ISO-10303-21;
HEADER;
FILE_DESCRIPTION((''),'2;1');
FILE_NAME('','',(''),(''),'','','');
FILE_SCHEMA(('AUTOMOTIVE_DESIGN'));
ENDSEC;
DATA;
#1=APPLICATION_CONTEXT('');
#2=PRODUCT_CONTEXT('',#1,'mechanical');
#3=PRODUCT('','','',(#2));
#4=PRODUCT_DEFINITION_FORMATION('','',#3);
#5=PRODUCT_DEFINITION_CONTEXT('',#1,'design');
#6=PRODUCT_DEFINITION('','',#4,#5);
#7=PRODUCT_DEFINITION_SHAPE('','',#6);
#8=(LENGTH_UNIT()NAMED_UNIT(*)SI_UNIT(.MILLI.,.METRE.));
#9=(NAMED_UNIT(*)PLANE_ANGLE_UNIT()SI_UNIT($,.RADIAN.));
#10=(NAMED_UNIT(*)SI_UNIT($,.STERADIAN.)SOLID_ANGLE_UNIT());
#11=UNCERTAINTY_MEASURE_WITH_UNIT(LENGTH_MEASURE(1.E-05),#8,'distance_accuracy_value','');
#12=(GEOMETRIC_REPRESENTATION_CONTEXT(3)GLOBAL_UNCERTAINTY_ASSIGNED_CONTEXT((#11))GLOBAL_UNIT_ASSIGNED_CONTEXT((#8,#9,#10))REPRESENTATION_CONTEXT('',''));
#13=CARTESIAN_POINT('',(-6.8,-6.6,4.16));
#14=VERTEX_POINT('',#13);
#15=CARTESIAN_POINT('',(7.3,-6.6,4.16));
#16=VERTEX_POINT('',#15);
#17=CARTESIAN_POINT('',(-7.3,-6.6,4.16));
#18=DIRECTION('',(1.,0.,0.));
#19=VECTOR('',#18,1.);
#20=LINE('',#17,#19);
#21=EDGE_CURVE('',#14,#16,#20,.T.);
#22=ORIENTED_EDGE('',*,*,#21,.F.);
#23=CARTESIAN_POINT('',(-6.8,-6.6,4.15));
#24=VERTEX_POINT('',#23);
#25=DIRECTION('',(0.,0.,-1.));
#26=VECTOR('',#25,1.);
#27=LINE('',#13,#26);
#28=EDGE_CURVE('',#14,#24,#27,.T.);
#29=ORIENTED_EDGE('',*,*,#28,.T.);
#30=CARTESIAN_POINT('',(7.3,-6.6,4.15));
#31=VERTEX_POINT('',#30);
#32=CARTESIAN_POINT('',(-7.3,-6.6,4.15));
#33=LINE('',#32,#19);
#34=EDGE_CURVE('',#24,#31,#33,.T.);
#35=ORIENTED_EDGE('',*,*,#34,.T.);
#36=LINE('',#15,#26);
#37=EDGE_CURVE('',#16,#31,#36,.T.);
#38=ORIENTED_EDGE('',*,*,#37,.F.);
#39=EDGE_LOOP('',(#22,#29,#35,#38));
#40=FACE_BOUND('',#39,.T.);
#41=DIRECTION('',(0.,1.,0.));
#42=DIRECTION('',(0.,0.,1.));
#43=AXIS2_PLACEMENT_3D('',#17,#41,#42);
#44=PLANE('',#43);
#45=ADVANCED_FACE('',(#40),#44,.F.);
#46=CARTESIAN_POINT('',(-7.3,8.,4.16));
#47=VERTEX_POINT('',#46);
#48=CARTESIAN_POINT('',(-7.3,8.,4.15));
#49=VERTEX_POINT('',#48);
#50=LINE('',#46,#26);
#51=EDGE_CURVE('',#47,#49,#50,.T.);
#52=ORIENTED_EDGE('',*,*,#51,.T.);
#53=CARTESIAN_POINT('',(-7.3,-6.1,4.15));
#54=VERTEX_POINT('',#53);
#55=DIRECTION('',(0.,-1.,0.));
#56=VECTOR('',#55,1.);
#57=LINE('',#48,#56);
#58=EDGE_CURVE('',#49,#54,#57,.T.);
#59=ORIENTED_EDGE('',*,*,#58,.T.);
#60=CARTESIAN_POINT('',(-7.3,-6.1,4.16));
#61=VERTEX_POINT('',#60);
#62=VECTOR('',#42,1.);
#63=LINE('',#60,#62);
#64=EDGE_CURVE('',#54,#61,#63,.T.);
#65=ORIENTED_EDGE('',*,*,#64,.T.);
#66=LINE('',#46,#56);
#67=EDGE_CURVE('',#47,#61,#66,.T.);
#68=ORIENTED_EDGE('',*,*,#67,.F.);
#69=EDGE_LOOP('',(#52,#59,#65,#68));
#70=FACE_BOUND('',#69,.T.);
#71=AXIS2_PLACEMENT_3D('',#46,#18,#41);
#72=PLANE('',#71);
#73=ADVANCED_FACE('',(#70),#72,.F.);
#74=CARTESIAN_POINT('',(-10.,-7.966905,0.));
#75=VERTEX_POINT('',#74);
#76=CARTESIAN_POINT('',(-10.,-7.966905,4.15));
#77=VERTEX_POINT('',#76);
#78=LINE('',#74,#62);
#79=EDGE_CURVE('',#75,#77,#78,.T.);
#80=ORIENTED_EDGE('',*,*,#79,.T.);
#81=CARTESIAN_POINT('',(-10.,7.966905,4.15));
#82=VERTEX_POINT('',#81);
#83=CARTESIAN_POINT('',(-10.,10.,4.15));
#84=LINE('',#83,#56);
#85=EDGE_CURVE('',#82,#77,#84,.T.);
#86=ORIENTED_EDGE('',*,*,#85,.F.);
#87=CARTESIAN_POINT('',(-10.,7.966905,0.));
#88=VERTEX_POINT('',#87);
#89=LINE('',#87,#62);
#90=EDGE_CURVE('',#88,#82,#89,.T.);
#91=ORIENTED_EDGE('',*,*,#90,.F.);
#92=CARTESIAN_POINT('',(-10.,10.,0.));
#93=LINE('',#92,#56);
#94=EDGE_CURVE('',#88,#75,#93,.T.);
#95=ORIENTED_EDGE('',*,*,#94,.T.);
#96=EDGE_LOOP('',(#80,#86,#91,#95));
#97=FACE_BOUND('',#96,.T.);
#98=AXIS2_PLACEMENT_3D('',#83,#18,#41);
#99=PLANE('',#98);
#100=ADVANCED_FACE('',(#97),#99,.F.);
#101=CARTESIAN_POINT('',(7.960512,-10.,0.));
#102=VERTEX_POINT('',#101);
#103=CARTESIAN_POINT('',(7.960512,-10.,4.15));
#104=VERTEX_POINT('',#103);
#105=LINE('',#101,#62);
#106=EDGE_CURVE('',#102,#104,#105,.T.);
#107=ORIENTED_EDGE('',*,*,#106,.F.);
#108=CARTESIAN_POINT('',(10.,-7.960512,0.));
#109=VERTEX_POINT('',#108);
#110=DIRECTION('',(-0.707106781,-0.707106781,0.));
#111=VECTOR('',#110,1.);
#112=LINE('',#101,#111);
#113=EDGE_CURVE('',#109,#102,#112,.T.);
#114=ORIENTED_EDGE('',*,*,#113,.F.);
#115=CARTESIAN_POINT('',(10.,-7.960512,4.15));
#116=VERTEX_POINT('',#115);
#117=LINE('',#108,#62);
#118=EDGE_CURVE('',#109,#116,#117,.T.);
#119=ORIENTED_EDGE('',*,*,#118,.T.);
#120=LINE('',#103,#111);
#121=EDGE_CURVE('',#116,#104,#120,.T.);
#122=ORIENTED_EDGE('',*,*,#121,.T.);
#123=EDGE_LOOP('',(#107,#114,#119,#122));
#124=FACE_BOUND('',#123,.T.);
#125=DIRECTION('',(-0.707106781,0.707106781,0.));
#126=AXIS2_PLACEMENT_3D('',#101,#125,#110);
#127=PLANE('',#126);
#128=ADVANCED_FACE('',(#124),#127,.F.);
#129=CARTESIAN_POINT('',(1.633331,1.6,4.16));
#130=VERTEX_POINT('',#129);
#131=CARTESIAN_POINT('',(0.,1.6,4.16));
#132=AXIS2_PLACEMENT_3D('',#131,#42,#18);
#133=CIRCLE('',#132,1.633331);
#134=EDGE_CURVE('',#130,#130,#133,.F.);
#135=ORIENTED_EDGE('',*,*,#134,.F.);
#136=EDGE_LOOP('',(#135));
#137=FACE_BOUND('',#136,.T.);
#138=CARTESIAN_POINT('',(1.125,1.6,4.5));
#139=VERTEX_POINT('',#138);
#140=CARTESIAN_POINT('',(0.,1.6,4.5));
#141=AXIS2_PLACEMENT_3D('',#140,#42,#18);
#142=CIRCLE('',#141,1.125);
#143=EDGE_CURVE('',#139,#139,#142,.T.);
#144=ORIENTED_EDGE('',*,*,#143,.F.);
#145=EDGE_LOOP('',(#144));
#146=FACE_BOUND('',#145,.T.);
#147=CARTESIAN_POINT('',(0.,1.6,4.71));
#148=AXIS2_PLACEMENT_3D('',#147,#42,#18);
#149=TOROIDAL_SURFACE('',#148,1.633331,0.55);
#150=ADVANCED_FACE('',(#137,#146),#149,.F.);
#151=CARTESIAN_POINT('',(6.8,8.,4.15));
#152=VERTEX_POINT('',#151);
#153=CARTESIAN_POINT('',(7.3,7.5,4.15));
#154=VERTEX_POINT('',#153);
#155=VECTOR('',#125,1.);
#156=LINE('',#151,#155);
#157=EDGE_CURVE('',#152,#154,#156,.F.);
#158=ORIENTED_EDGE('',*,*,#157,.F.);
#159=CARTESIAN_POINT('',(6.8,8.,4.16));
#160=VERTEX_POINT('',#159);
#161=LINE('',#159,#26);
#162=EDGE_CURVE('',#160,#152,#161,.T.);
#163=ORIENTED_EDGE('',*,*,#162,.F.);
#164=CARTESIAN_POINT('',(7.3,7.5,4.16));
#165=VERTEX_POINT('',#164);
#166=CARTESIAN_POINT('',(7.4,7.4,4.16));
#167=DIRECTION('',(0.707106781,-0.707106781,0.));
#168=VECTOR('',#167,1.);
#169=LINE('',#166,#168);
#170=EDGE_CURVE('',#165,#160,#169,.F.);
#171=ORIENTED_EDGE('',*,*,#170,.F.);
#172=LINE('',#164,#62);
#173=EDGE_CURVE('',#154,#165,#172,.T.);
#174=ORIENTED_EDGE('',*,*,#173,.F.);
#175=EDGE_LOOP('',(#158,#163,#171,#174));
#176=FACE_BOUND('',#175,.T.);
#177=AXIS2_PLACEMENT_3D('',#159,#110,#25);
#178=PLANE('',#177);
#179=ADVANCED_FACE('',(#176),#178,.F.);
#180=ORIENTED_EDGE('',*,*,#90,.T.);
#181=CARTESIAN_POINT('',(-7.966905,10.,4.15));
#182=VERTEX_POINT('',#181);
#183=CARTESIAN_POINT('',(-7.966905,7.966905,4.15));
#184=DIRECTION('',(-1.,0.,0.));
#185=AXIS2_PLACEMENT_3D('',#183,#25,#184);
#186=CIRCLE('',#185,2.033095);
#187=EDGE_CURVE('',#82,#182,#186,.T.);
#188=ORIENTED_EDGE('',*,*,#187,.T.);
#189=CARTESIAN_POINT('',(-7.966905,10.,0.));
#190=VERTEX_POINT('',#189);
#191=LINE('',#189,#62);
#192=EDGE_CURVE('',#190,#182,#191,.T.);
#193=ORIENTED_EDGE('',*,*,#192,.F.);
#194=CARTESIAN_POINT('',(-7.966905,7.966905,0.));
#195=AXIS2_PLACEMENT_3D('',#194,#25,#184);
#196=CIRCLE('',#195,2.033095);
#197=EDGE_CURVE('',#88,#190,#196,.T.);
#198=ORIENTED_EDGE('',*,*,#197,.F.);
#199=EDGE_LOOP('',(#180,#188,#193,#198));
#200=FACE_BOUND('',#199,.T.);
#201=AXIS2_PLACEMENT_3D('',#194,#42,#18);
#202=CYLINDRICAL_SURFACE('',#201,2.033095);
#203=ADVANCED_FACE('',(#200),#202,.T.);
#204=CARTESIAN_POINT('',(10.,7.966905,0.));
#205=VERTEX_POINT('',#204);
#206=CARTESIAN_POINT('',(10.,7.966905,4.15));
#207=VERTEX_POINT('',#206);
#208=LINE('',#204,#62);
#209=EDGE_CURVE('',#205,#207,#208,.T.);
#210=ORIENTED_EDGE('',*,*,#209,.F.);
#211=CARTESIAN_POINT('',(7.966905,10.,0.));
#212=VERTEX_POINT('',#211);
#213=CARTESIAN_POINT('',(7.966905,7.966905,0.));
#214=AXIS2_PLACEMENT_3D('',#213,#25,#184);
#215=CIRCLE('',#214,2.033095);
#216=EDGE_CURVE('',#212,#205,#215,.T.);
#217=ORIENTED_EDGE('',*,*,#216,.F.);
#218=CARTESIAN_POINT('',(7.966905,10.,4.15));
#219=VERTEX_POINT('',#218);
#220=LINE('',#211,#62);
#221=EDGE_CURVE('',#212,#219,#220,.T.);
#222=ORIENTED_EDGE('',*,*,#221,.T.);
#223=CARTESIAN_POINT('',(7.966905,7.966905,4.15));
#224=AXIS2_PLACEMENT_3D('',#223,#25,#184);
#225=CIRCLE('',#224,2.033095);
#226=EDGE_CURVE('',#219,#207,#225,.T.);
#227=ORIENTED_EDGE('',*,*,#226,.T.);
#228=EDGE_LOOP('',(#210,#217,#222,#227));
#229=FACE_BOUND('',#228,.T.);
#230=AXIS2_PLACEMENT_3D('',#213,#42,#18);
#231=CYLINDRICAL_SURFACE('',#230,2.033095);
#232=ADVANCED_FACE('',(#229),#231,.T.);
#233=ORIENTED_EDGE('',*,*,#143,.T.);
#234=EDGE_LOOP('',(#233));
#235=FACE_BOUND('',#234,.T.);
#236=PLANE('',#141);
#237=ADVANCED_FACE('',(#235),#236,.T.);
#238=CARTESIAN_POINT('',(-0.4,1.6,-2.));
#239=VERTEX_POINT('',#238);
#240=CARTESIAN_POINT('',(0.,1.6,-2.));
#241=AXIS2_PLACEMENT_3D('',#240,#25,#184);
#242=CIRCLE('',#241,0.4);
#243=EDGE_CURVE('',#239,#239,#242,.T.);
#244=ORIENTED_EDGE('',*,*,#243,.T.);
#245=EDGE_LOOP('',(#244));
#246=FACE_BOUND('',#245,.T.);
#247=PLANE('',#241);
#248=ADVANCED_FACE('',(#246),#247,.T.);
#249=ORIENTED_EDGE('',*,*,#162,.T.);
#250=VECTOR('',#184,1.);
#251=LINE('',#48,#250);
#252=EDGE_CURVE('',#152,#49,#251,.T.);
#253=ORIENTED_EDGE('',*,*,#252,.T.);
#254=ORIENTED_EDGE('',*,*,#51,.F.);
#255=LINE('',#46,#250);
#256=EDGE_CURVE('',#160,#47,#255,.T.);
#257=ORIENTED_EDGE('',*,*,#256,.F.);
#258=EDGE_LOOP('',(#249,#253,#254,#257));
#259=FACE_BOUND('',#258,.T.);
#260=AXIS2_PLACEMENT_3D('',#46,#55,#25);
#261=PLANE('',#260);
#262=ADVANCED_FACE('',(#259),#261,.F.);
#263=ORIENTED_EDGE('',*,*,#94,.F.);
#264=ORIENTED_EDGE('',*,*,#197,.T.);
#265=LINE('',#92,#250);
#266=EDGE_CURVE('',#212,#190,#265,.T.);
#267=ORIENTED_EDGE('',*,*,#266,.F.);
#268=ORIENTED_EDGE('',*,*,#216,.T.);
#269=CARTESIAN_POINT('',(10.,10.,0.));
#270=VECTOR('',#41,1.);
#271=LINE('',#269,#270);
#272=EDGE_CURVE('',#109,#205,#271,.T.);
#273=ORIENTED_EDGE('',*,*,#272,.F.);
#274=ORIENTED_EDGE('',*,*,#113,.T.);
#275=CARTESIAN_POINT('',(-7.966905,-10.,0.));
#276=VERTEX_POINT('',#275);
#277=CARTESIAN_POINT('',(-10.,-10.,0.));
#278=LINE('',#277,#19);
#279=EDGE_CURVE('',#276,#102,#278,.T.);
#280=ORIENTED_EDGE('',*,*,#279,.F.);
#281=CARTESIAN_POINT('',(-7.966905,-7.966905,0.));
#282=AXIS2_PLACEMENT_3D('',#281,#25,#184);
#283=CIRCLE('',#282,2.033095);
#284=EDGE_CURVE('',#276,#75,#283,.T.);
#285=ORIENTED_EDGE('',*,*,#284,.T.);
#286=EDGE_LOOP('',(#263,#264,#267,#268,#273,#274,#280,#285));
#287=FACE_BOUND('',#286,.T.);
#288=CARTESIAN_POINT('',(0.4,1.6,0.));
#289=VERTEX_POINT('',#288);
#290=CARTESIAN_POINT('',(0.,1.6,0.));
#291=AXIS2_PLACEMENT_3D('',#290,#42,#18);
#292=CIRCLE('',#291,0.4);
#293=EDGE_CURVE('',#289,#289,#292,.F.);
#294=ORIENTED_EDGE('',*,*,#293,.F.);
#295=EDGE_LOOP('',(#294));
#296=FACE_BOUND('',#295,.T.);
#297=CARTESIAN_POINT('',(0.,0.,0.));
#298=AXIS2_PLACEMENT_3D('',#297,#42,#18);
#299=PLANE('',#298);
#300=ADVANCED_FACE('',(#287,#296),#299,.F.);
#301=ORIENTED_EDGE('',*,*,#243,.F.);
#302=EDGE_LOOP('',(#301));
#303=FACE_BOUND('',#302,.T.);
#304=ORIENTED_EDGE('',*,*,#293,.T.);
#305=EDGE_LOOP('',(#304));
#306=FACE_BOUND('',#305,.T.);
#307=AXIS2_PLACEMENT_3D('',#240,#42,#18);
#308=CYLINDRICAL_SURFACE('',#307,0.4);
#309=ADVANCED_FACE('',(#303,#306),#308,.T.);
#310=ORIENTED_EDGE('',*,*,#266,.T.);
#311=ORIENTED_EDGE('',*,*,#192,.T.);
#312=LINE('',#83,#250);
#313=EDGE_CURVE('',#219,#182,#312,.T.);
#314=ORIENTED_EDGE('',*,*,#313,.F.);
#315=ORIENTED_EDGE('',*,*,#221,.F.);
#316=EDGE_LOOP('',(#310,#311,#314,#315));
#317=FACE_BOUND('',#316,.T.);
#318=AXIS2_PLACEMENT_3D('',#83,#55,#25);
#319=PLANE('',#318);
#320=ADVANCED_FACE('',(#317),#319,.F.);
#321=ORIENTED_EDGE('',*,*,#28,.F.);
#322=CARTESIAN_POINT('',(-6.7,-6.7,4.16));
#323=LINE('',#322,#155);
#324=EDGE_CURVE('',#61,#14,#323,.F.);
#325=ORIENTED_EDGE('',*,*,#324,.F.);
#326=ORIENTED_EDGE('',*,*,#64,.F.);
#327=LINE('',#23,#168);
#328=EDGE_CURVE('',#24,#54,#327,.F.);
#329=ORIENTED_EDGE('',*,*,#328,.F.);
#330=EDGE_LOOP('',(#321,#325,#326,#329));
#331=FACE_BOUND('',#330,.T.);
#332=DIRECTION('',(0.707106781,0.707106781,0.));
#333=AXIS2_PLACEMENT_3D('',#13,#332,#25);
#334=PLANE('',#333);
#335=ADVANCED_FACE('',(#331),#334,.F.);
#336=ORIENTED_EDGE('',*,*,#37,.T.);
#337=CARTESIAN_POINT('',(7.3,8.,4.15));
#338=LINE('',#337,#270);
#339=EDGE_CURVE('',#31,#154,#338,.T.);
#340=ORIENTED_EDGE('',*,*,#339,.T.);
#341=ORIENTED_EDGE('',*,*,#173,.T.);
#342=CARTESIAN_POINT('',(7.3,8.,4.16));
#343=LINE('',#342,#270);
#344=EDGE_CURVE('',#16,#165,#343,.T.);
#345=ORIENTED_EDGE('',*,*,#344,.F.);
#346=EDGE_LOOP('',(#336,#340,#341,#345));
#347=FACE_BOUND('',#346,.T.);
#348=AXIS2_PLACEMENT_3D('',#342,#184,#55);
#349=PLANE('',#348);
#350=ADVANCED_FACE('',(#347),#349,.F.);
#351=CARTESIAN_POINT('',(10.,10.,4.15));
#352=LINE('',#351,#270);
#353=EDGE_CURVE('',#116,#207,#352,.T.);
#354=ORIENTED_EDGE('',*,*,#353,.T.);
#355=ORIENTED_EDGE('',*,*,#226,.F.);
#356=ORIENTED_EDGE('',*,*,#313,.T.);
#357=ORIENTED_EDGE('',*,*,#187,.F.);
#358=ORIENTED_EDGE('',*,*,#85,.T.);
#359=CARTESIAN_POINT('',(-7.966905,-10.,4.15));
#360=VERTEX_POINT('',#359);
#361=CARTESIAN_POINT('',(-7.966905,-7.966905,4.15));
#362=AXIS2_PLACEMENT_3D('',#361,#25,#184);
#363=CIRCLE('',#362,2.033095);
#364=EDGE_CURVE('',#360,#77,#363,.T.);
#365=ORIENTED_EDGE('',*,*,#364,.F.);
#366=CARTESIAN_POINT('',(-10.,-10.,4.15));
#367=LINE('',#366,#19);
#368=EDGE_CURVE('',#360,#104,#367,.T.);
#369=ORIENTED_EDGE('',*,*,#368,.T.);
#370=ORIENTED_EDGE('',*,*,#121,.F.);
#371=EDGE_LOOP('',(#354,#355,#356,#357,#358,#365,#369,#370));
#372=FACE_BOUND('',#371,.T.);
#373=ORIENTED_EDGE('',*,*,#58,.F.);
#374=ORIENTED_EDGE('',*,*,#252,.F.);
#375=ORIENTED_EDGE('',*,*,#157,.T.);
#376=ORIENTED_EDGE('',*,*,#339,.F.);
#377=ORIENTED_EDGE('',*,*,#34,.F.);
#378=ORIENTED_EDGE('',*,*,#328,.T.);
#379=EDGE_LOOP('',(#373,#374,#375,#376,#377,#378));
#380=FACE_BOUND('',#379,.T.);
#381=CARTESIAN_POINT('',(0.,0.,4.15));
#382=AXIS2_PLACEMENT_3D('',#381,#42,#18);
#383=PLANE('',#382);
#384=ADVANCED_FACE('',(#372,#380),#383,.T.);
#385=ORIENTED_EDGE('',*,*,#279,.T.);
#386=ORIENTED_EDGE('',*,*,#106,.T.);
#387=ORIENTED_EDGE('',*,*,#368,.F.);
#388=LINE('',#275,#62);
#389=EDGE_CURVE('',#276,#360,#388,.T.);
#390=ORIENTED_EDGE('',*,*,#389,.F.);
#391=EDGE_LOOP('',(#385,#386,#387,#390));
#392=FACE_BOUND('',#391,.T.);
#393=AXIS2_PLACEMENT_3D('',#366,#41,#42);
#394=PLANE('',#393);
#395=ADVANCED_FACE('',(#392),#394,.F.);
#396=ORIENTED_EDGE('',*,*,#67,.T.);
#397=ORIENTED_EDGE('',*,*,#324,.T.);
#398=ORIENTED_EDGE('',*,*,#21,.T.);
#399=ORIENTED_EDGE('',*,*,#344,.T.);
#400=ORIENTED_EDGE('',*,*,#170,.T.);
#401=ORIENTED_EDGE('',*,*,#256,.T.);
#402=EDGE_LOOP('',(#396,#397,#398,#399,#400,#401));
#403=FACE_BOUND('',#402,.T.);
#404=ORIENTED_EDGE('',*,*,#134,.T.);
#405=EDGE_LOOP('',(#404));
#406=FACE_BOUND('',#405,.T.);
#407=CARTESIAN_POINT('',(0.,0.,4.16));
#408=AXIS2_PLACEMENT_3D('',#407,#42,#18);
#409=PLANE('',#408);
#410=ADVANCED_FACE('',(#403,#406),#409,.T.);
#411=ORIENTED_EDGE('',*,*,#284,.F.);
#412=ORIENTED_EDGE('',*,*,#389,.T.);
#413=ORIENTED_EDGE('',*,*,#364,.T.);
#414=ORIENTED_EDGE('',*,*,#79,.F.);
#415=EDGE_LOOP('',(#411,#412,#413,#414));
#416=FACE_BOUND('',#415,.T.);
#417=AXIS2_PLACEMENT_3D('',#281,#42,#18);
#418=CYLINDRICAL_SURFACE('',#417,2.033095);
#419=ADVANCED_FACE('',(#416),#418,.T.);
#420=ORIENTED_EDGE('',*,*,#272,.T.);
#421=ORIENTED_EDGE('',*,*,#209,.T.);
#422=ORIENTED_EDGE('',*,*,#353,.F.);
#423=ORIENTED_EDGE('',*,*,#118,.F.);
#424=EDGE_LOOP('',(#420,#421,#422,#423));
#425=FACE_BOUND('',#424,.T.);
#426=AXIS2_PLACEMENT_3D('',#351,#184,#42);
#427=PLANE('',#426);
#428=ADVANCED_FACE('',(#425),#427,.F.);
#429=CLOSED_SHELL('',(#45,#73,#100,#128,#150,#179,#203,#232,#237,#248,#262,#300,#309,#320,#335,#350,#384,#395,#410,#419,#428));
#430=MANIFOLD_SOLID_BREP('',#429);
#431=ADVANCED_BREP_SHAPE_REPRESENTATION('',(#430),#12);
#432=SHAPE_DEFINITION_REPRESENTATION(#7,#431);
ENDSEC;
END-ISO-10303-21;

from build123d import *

# Parameters (mm, degrees)
SKETCH1_W           = 20
SKETCH1_H           = 20
BOSS_EXTRUDE1_DEPTH = 4.15
SKETCH4_R           = 1.125
BOSS_EXTRUDE3_DEPTH = 0.35
SKETCH5_W           = 14.6
SKETCH5_H           = 14.6
BOSS_EXTRUDE4_DEPTH = 0.01
FILLET1_R           = 0.55
CHAMFER1_SIZE       = 0.5
CUT_EXTRUDE1_DEPTH  = 15.73847007
SKETCH7_R           = 0.4
BOSS_EXTRUDE5_DEPTH = 2


with BuildPart() as part:
    # Sketch1 → Boss-Extrude1 (new body)
    with BuildSketch(Plane.XY):
        Rectangle(SKETCH1_W, SKETCH1_H)
    extrude(amount=BOSS_EXTRUDE1_DEPTH)

    # Sketch4 → Boss-Extrude3 (add)
    with BuildSketch(Plane.XY.offset(4.15)):
        with Locations((0, 1.6)):
            Circle(SKETCH4_R)
    extrude(amount=BOSS_EXTRUDE3_DEPTH)

    # Sketch5 → Boss-Extrude4 (add)
    with BuildSketch(Plane.XY.offset(4.15)):
        with Locations((0, 0.7)):
            Rectangle(SKETCH5_W, SKETCH5_H)
    extrude(amount=BOSS_EXTRUDE4_DEPTH)

    # Fillet1
    # the kernel refuses this fillet: 0.55 mm, written as the material it adds along each edge
    with BuildSketch(Plane(origin=(0, 1.6, 4.16), x_dir=(1, 0, 0), z_dir=(0, 1, 0))) as fillet1_piece_1:
        with BuildLine():
            CenterArc((1.633330601, -0.55), FILLET1_R, 90, 67.553649419)
            Line((1.125, -0.34), (1.114833388, -0.3358))
            ThreePointArc((1.114833388, -0.3358), (1.114, -0.17), (1.114, 0))
            Line((1.114, 0), (1.125, 0.011))
            Line((1.125, 0.011), (1.633330601, 0.011))
            Line((1.633330601, 0.011), (1.633330601, 0))
        make_face()
    revolve(axis=Axis((0, 1.6, 4.16), (0, 0, -1)))

    # Chamfer1
    chamfer1_edges = [part.edges().sort_by_distance(p)[0] for p in [
        (-7.3, -6.6, 4.155),
        (7.3, 8, 4.155),
    ]]
    chamfer(chamfer1_edges, length=CHAMFER1_SIZE)

    # Sketch6 → Cut-Extrude1 (cut, through all)
    with BuildSketch(Plane.XY.offset(4.15)):
        Polygon((7.960512242, -10), (10, -7.960512242), (10, -10), align=None)
        with BuildLine():
            Line((10, 7.966904756), (10, 10))
            Line((10, 10), (7.966904756, 10))
            ThreePointArc((7.966904756, 10), (9.40452019, 9.40452019), (10, 7.966904756))
        make_face()
        with BuildLine():
            Line((-7.966904756, 10), (-10, 10))
            Line((-10, 10), (-10, 7.966904756))
            ThreePointArc((-10, 7.966904756), (-9.40452019, 9.40452019), (-7.966904756, 10))
        make_face()
        with BuildLine():
            Line((-10, -7.966904756), (-10, -10))
            Line((-10, -10), (-7.966904756, -10))
            ThreePointArc((-7.966904756, -10), (-9.40452019, -9.40452019), (-10, -7.966904756))
        make_face()
    extrude(amount=-CUT_EXTRUDE1_DEPTH, mode=Mode.SUBTRACT)

    # Sketch7 → Boss-Extrude5 (add)
    with BuildSketch(Plane(origin=(0, 0, 0), x_dir=(-1, 0, 0), z_dir=(0, 0, -1))):
        with Locations(Location((0, 1.6, 0), (0, 0, 180))):
            Circle(SKETCH7_R)
    extrude(amount=BOSS_EXTRUDE5_DEPTH)


solid = part.part
